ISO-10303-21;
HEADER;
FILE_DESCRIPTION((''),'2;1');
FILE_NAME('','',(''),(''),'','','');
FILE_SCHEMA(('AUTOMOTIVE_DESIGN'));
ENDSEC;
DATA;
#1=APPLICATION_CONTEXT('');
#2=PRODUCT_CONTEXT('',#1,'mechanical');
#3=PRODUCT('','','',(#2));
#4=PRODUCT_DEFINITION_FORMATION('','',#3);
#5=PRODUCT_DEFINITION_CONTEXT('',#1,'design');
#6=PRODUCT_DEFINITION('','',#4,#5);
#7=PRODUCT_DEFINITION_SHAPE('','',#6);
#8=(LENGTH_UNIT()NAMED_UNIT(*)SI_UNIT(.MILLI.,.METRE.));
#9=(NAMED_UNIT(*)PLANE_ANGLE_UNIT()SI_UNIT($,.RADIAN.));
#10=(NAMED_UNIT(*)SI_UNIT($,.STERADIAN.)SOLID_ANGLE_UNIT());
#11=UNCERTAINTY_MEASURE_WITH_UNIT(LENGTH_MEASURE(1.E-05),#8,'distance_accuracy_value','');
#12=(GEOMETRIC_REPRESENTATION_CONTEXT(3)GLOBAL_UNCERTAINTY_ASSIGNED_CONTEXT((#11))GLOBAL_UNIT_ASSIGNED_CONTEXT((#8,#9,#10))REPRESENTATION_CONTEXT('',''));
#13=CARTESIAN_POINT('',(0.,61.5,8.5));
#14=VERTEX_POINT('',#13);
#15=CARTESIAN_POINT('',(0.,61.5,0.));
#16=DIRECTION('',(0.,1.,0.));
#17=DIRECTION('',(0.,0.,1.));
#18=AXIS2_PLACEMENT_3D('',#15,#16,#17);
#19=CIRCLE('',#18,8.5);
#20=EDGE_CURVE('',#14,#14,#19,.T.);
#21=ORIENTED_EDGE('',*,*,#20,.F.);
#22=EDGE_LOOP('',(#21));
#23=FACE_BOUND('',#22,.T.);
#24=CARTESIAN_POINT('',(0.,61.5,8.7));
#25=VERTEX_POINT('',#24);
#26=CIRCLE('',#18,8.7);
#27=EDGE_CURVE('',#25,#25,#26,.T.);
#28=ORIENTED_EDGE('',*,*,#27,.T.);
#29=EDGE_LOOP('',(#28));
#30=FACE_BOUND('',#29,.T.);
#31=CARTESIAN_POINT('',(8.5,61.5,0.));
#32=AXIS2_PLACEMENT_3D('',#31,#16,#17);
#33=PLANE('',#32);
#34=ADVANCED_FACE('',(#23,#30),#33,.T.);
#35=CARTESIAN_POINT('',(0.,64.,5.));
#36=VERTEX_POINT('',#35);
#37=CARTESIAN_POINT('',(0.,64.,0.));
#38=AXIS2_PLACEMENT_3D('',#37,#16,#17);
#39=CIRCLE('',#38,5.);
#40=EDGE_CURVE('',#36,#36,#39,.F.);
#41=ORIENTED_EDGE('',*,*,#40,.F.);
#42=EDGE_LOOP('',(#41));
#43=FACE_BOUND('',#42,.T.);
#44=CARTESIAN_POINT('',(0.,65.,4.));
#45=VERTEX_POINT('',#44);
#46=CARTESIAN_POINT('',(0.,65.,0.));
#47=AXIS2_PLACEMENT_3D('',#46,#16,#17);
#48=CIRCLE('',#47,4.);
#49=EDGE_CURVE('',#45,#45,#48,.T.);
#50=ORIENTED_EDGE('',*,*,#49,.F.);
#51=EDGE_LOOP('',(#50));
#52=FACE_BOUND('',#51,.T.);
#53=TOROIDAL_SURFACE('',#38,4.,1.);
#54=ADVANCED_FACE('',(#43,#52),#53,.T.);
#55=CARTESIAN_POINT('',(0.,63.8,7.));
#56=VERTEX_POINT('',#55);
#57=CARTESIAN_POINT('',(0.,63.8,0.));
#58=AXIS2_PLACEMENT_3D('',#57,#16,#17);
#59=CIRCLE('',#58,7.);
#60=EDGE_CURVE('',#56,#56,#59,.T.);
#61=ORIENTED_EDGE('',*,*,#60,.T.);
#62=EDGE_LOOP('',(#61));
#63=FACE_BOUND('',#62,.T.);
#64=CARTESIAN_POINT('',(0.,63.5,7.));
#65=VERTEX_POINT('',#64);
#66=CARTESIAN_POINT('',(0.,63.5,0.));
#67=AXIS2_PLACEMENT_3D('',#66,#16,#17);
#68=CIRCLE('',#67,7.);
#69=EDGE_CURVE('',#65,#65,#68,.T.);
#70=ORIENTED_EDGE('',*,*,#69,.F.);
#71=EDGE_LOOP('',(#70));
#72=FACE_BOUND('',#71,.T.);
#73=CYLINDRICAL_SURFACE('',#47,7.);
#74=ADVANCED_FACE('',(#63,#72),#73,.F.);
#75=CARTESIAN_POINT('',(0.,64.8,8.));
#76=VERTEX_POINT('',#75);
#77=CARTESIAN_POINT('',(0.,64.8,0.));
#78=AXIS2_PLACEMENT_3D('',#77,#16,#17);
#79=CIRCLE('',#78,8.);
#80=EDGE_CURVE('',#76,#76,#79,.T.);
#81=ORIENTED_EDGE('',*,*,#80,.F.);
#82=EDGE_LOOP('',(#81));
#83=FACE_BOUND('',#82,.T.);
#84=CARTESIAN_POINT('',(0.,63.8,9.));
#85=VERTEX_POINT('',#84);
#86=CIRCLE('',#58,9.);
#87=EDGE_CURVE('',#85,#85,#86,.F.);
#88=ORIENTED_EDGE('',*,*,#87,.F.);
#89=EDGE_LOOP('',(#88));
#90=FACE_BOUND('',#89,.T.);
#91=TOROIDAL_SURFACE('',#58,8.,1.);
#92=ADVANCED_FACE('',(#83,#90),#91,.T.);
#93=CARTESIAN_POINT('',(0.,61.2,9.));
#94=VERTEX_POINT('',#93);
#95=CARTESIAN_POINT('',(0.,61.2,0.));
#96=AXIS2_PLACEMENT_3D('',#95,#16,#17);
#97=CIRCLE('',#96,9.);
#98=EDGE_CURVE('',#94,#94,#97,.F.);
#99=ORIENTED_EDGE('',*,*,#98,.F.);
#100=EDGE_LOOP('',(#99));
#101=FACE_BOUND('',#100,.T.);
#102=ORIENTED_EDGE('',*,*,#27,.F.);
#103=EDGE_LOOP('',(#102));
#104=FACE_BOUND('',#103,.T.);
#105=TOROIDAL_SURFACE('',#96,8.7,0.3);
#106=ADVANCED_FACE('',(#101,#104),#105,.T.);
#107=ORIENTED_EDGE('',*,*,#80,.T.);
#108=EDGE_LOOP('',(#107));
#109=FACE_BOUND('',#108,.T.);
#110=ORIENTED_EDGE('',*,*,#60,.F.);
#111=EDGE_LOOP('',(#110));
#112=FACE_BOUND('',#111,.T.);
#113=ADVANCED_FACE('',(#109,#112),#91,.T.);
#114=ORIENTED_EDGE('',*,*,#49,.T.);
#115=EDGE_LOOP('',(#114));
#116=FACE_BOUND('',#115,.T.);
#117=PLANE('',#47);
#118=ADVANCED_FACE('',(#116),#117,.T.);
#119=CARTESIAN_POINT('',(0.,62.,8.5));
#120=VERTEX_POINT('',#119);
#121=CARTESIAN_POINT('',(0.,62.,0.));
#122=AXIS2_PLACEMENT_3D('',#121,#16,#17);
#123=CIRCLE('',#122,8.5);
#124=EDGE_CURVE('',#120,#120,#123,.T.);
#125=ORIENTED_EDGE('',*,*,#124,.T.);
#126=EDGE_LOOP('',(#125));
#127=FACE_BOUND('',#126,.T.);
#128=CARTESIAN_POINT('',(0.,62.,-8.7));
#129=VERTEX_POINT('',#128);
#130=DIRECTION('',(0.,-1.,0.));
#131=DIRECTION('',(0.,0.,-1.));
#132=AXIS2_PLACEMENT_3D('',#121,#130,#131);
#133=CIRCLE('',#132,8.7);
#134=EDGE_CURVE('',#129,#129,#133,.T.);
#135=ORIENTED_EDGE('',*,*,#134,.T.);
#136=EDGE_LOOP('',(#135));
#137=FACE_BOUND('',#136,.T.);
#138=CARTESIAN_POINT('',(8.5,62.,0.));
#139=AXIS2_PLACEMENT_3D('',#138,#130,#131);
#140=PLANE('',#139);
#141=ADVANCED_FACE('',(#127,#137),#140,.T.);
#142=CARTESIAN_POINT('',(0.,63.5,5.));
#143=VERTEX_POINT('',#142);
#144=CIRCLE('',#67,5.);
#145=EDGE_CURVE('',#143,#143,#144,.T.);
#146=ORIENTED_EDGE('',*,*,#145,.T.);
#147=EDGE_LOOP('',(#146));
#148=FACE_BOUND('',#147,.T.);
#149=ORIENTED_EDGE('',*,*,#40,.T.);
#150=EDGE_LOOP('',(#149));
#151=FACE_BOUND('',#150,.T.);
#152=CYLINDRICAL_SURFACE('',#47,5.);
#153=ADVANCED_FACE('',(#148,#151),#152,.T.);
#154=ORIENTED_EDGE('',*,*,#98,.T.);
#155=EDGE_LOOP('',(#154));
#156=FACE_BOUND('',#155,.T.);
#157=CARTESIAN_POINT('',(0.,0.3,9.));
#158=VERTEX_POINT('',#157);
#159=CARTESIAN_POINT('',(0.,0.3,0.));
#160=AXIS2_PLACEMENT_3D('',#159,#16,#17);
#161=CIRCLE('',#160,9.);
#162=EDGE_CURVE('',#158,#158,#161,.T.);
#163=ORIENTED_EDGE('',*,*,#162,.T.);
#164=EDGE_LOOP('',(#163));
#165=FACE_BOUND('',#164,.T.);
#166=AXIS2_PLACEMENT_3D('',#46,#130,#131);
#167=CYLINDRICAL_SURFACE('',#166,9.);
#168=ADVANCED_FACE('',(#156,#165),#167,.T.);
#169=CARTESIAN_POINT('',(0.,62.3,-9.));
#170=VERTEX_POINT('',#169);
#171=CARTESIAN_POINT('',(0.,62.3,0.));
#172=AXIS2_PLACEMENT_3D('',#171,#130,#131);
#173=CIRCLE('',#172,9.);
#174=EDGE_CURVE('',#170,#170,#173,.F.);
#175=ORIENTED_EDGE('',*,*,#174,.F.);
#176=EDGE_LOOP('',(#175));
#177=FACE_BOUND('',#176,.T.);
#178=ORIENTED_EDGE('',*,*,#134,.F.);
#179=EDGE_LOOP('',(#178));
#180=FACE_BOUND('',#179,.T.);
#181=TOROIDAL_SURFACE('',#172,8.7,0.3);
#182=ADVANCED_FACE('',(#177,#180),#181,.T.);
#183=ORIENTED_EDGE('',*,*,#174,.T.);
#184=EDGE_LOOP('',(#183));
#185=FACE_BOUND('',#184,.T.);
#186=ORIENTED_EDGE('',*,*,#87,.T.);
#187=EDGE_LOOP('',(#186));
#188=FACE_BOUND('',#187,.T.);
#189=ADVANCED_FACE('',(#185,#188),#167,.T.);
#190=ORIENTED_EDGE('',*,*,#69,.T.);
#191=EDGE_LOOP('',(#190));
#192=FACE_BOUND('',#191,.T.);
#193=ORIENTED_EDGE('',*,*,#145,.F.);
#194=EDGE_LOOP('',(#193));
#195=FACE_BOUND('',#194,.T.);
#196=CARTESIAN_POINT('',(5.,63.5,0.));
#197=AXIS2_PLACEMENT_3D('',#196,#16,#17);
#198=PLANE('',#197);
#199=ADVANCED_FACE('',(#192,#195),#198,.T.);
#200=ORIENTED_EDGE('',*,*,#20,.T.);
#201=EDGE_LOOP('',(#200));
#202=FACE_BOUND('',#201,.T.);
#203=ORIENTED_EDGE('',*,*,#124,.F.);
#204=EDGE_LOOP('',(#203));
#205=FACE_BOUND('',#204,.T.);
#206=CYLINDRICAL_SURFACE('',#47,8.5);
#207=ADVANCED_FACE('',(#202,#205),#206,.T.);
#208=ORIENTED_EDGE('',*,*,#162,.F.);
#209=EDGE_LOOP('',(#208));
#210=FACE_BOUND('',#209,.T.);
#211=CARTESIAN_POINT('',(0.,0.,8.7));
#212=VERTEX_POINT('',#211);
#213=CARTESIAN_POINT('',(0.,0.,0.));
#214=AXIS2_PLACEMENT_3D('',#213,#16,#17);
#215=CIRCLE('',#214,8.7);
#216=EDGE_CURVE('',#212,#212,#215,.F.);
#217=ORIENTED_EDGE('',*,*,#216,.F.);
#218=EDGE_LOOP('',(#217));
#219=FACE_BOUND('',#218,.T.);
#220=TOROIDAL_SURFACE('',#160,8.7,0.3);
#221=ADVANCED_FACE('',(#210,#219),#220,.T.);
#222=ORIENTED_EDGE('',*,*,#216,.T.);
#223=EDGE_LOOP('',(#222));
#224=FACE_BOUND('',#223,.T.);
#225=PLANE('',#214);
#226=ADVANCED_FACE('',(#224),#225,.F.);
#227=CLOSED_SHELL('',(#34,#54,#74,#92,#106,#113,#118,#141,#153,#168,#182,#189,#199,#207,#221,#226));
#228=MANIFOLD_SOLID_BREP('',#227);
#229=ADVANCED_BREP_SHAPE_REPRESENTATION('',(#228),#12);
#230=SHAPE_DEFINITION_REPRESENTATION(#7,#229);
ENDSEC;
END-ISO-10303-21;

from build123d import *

# Parameters (mm, degrees)
SKETCH1_R           = 9
BOSS_EXTRUDE1_DEPTH = 65
SKETCH2_W           = 0.5
SKETCH2_H           = 0.5
FILLET1_R           = 1
FILLET2_R           = 0.3


with BuildPart() as part:
    # Sketch1 → Boss-Extrude1 (new body)
    with BuildSketch(Plane(origin=(0, 0, 0), x_dir=(1, 0, 0), z_dir=(0, 1, 0))):
        with Locations(Location((0, 0, 0), (0, 0, 270))):
            Circle(SKETCH1_R)
    extrude(amount=BOSS_EXTRUDE1_DEPTH)

    # Sketch2 → Cut-Revolve1 (revolve, cut)
    with BuildSketch(Plane.XY, mode=Mode.PRIVATE) as cut_revolve1_sk:
        Polygon((5, 65), (5, 63.5), (7, 63.5), (7, 64.8), (9, 64.8), (9, 65), align=None)
        with Locations((8.75, 61.75)):
            Rectangle(SKETCH2_W, SKETCH2_H)
    revolve(cut_revolve1_sk.sketch.rotate(Axis((0, 65, 0), (0, -1, 0)), 90), axis=Axis((0, 65, 0), (0, -1, 0)), mode=Mode.SUBTRACT)

    # Fillet1
    fillet1_edges = [part.edges().sort_by_distance(p)[0] for p in [
        (0, 65, -5),
        (0, 64.8, -7),
        (0, 64.8, -9),
    ]]
    fillet(fillet1_edges, radius=FILLET1_R - 0.0001)  # a hair under: the kernel refuses the full size

    # Fillet2
    fillet2_edges = [part.edges().sort_by_distance(p)[0] for p in [
        (0, 61.5, -9),
        (0, 62, -9),
        (0, 0, -9),
    ]]
    fillet(fillet2_edges, radius=FILLET2_R)


solid = part.part
